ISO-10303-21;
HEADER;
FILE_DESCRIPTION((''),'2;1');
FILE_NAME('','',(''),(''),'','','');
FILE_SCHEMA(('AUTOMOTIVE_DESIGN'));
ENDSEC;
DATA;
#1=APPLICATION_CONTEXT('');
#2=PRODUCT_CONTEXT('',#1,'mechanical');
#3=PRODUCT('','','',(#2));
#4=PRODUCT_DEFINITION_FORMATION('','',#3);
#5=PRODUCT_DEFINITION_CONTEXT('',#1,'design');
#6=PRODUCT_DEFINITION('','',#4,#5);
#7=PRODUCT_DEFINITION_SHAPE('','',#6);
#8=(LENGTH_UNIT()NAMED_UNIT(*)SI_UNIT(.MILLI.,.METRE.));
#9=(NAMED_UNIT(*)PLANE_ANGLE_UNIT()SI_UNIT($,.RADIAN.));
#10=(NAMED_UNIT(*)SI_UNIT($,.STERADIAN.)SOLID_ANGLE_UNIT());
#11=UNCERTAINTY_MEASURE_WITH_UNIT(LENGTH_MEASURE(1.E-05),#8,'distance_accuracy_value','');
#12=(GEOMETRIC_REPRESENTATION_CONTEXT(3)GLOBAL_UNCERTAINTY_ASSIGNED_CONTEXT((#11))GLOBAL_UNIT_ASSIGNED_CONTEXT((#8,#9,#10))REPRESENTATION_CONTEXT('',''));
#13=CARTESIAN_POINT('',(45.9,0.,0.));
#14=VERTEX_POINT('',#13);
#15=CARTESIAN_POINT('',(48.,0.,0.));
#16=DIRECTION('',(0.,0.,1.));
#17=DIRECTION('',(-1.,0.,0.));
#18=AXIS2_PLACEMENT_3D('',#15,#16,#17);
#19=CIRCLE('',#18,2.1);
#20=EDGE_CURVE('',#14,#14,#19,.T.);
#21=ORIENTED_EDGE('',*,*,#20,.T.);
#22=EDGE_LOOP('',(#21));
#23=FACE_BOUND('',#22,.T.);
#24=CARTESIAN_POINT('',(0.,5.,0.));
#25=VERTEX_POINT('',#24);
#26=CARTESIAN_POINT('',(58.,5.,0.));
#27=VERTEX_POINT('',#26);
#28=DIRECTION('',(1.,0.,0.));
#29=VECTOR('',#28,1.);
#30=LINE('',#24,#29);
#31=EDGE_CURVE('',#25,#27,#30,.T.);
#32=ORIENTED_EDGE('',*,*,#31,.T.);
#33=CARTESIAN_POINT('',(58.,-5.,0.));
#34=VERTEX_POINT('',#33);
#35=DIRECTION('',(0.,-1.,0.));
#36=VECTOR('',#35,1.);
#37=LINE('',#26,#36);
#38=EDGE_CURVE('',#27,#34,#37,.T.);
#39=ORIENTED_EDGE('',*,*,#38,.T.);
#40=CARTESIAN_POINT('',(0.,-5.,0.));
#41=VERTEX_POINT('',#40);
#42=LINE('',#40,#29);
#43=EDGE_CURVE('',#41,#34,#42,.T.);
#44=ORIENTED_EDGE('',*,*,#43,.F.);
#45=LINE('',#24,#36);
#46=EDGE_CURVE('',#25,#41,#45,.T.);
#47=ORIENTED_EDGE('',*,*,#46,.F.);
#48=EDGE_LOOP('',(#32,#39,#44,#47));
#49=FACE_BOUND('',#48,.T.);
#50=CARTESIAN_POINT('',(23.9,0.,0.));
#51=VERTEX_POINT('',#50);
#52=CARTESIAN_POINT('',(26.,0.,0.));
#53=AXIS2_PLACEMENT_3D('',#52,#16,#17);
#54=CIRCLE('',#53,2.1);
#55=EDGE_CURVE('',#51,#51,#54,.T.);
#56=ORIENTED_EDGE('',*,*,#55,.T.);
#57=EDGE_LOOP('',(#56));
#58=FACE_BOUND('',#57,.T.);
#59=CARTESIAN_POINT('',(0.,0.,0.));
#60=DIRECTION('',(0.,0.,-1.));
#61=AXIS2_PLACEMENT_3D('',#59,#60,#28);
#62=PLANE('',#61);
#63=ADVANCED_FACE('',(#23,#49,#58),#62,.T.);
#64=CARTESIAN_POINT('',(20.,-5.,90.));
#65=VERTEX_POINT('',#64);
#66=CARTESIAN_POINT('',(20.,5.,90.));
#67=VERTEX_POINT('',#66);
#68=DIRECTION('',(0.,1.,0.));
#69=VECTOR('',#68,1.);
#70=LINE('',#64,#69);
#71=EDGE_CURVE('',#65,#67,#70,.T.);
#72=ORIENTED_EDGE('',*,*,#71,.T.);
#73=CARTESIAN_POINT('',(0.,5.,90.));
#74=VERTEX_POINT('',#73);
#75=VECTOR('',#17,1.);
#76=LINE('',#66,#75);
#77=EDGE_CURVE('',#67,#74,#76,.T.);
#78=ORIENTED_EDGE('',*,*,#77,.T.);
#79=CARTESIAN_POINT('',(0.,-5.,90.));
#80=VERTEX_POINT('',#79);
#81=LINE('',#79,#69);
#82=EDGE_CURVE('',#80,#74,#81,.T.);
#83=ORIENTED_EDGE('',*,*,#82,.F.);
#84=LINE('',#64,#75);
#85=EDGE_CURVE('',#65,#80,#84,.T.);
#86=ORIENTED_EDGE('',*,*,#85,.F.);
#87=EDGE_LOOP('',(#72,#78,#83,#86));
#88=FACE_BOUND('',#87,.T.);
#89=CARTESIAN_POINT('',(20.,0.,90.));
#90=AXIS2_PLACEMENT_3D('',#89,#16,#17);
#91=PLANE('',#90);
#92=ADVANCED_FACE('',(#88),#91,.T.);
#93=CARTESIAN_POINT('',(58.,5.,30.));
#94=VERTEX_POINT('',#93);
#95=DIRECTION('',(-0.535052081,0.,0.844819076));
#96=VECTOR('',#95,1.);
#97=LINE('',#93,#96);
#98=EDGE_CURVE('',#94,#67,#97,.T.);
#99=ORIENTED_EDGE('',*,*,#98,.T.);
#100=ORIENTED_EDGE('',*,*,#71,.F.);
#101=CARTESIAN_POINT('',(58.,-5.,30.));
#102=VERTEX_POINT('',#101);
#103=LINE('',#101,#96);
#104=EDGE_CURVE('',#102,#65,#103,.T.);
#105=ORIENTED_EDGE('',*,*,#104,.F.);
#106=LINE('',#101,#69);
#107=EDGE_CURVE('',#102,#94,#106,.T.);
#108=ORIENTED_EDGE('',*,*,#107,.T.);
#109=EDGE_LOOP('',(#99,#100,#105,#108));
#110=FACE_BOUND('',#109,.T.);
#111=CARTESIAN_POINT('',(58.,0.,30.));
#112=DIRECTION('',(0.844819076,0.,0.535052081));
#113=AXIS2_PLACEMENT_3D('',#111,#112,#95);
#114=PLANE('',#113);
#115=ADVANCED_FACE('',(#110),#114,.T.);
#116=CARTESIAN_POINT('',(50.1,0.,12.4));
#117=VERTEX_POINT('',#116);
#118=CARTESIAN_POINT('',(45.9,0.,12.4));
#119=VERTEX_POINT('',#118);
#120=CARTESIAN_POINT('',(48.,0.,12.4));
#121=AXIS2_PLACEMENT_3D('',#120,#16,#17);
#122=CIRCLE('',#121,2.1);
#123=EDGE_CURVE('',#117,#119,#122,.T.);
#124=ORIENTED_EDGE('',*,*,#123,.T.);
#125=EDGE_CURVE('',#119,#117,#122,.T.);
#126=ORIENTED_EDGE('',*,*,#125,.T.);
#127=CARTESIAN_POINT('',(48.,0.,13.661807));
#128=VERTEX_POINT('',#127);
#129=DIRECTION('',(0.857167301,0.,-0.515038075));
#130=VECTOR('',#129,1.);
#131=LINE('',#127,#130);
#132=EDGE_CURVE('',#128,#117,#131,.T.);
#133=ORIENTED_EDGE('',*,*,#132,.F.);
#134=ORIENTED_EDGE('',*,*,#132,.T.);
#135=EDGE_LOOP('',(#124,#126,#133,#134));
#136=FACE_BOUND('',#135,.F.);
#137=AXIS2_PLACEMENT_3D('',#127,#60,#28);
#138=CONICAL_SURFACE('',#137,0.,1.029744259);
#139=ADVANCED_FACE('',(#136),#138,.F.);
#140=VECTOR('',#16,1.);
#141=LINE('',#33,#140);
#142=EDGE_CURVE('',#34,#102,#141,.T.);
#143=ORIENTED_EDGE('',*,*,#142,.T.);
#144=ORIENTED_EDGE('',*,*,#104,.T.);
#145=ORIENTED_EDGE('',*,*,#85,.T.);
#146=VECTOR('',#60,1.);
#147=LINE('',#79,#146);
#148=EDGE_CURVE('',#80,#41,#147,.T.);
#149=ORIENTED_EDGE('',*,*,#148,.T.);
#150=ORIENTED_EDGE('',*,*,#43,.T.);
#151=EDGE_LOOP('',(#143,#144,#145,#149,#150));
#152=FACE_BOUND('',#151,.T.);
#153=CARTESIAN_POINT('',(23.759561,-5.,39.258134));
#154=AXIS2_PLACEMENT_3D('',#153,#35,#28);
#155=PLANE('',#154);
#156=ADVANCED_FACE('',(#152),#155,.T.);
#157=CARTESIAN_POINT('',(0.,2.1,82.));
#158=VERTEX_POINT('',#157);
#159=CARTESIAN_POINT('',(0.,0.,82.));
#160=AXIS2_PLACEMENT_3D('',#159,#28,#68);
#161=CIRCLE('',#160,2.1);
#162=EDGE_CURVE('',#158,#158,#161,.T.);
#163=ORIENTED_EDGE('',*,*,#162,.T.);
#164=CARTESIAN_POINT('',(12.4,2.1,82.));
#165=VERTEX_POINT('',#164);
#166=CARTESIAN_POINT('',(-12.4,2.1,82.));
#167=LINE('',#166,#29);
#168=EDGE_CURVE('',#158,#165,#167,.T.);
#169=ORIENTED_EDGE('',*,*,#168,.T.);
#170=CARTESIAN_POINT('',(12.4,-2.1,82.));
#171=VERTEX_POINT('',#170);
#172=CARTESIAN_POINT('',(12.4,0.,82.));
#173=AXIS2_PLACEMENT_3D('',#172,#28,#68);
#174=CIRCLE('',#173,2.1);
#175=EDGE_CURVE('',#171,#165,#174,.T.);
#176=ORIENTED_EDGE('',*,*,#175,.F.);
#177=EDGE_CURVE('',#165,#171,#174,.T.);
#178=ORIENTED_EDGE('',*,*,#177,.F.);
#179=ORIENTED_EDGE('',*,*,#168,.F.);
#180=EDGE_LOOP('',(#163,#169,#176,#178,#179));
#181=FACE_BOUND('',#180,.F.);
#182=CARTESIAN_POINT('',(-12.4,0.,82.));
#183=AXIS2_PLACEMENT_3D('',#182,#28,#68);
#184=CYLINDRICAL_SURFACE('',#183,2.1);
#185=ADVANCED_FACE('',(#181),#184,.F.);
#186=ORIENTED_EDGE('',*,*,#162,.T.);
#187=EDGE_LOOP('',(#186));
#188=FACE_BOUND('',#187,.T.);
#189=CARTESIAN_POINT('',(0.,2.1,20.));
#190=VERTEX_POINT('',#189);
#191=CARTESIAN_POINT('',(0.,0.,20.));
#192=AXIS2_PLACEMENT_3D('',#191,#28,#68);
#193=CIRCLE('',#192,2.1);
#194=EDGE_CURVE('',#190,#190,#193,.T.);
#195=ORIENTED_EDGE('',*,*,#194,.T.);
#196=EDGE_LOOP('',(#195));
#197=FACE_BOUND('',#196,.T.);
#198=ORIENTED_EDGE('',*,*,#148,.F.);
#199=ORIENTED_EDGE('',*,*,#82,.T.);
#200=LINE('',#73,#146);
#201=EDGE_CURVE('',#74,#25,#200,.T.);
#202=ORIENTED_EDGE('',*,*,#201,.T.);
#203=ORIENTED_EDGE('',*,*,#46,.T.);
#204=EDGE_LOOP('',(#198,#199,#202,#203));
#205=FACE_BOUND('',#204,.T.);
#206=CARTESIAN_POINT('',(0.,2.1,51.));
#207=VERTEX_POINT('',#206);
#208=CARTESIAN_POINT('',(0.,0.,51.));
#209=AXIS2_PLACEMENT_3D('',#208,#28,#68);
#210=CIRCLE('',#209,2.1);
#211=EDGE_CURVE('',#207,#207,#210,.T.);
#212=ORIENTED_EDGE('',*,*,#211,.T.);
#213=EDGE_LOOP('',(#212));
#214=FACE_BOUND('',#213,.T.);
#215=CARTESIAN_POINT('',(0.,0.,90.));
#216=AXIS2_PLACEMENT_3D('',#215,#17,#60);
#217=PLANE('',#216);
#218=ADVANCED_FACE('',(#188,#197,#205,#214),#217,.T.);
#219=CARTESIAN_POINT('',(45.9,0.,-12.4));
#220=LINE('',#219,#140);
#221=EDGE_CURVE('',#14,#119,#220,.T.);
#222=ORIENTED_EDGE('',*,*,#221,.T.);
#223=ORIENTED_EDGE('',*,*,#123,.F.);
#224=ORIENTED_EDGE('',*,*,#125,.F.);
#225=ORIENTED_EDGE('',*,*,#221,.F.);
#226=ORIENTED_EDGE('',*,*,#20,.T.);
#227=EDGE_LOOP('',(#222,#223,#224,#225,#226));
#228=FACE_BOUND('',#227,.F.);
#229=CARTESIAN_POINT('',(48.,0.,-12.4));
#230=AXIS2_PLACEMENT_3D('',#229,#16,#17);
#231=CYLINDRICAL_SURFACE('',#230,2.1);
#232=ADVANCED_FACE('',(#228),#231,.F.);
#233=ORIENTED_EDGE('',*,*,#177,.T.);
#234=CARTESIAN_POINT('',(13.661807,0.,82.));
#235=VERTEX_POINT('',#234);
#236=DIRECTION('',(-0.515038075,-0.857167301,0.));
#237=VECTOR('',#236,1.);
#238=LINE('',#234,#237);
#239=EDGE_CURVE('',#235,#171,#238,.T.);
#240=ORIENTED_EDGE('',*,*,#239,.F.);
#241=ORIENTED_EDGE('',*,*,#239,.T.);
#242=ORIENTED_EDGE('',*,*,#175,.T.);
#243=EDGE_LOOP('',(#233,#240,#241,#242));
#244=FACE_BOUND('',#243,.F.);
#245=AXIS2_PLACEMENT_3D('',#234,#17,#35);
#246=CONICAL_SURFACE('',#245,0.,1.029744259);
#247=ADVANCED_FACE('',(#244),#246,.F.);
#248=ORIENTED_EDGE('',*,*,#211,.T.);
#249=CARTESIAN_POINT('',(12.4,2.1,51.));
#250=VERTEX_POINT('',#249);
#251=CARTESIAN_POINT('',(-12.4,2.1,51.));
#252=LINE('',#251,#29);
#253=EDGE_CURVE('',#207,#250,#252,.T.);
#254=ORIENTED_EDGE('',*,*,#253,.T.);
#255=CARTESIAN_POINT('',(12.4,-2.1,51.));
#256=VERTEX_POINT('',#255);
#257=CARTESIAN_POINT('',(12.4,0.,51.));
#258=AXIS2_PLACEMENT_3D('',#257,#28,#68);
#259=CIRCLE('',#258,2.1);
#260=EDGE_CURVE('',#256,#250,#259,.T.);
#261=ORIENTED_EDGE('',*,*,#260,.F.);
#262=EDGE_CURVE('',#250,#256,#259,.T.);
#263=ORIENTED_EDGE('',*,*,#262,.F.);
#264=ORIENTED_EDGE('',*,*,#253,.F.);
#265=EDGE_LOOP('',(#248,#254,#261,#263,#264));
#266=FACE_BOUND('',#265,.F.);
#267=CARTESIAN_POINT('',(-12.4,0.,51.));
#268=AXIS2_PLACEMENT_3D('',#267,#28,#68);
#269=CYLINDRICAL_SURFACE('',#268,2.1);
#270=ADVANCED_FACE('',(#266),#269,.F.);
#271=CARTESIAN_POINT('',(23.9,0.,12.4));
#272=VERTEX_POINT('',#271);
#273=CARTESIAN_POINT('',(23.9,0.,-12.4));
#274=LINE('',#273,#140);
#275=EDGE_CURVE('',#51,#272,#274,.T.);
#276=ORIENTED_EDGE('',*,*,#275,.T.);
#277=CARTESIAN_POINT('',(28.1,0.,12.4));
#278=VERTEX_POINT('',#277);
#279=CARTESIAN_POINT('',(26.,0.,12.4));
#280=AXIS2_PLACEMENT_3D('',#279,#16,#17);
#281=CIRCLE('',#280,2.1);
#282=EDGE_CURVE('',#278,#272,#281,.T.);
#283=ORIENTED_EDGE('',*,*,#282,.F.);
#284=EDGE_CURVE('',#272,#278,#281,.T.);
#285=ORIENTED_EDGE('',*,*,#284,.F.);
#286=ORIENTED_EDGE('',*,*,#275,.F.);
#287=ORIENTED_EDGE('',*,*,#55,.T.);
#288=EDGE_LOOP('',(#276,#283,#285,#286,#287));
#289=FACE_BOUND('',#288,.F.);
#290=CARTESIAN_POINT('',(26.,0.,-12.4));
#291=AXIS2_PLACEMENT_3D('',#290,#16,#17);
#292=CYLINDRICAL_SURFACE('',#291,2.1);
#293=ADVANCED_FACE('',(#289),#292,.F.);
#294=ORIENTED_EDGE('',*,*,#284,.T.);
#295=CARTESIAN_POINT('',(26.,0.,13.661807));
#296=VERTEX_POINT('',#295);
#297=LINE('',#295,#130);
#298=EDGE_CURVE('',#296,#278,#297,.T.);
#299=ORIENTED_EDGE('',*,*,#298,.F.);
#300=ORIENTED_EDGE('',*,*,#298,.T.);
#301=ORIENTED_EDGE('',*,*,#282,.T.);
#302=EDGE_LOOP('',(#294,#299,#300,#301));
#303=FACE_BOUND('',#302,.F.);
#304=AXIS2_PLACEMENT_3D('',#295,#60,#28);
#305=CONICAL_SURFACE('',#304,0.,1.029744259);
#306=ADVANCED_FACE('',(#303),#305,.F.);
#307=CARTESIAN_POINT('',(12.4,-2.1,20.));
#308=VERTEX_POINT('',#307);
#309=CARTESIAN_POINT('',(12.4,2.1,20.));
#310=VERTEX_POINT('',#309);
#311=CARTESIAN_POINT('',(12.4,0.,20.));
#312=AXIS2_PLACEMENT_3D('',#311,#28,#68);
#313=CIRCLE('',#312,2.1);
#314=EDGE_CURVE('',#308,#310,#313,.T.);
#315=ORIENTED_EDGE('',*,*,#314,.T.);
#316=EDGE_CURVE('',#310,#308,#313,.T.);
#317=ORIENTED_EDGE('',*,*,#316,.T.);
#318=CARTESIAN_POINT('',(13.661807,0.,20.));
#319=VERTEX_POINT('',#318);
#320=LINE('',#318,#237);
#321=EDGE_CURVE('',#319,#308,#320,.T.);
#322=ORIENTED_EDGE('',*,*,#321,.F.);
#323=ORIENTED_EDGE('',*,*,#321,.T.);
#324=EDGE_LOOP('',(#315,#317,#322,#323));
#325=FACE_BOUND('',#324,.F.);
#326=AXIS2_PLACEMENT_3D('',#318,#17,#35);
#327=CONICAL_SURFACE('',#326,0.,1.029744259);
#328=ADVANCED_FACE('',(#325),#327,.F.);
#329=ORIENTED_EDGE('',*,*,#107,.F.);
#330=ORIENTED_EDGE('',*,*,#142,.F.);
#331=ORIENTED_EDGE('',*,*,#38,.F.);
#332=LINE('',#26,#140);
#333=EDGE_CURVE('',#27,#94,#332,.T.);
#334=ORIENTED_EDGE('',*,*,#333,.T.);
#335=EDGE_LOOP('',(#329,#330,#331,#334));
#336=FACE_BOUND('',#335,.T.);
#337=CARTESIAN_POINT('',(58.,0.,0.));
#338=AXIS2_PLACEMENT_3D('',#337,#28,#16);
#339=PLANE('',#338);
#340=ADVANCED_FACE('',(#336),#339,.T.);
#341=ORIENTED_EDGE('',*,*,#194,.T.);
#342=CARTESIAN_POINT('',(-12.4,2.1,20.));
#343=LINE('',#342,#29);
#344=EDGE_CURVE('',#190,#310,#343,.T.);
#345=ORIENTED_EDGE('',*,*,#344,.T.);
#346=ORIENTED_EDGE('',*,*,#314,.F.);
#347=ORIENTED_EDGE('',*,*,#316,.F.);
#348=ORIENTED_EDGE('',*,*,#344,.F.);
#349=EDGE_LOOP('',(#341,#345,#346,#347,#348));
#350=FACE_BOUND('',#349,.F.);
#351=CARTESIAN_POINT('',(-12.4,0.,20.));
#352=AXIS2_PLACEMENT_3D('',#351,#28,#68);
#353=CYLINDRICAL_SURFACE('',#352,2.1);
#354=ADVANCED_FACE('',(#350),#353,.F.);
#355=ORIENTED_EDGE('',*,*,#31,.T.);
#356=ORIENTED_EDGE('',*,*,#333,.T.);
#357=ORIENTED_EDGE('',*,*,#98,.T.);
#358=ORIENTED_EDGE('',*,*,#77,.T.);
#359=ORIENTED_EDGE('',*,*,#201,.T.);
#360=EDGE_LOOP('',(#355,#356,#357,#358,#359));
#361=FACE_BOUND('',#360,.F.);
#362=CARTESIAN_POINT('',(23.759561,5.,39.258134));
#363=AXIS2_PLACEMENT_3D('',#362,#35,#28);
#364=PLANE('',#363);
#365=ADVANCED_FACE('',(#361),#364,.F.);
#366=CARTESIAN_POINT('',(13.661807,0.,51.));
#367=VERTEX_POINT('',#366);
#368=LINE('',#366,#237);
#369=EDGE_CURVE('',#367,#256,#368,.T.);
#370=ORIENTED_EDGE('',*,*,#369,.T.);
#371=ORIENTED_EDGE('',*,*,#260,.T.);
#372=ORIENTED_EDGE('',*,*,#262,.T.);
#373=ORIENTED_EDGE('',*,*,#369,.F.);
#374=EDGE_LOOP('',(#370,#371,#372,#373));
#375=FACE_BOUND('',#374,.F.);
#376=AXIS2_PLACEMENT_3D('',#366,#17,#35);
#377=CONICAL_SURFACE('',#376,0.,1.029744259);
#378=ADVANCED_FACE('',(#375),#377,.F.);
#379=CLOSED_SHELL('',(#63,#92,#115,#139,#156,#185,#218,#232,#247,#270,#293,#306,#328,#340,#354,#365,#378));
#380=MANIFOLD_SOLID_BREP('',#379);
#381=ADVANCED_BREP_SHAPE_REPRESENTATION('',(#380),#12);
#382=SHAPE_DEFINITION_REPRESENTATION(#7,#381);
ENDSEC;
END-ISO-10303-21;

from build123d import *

# Parameters (mm, degrees)
F1_DEPTH = 5
F3_D     = 4.2
F3_DEPTH = 12.4
F3_TIP   = 1.2618073
F5_D     = 4.2
F5_DEPTH = 12.4
F5_TIP   = 1.2618073


# Not quite as in the source:
# - a feature names something its author has since deleted; it is built from what else it names


with BuildPart() as f1:
    # F0 (on Front) → F1 (new body, symmetric)
    with BuildSketch(Plane.XZ):
        Polygon((0, 90), (0, 0), (58, 0), (58, 30), (20, 90), align=None)
    extrude(amount=F1_DEPTH, both=True)

    # F3
    with Locations(Plane(origin=(0, 0, 0), x_dir=(1, 0, 0), z_dir=(0, 0, -1))):
        with Locations((26, 0), (48, 0)):
            Hole(F3_D / 2, depth=F3_DEPTH)
            with Locations((0, 0, -(F3_DEPTH + F3_TIP / 2))):  # 118° drill point
                Cone(0, F3_D / 2, F3_TIP, mode=Mode.SUBTRACT)

    # F5
    with Locations(Plane(origin=(0, 0, 0), x_dir=(0, -1, 0), z_dir=(-1, 0, 0))):
        with Locations((0, 20), (0, 82), (0, 51)):
            Hole(F5_D / 2, depth=F5_DEPTH)
            with Locations((0, 0, -(F5_DEPTH + F5_TIP / 2))):  # 118° drill point
                Cone(0, F5_D / 2, F5_TIP, mode=Mode.SUBTRACT)


solid = f1.part
